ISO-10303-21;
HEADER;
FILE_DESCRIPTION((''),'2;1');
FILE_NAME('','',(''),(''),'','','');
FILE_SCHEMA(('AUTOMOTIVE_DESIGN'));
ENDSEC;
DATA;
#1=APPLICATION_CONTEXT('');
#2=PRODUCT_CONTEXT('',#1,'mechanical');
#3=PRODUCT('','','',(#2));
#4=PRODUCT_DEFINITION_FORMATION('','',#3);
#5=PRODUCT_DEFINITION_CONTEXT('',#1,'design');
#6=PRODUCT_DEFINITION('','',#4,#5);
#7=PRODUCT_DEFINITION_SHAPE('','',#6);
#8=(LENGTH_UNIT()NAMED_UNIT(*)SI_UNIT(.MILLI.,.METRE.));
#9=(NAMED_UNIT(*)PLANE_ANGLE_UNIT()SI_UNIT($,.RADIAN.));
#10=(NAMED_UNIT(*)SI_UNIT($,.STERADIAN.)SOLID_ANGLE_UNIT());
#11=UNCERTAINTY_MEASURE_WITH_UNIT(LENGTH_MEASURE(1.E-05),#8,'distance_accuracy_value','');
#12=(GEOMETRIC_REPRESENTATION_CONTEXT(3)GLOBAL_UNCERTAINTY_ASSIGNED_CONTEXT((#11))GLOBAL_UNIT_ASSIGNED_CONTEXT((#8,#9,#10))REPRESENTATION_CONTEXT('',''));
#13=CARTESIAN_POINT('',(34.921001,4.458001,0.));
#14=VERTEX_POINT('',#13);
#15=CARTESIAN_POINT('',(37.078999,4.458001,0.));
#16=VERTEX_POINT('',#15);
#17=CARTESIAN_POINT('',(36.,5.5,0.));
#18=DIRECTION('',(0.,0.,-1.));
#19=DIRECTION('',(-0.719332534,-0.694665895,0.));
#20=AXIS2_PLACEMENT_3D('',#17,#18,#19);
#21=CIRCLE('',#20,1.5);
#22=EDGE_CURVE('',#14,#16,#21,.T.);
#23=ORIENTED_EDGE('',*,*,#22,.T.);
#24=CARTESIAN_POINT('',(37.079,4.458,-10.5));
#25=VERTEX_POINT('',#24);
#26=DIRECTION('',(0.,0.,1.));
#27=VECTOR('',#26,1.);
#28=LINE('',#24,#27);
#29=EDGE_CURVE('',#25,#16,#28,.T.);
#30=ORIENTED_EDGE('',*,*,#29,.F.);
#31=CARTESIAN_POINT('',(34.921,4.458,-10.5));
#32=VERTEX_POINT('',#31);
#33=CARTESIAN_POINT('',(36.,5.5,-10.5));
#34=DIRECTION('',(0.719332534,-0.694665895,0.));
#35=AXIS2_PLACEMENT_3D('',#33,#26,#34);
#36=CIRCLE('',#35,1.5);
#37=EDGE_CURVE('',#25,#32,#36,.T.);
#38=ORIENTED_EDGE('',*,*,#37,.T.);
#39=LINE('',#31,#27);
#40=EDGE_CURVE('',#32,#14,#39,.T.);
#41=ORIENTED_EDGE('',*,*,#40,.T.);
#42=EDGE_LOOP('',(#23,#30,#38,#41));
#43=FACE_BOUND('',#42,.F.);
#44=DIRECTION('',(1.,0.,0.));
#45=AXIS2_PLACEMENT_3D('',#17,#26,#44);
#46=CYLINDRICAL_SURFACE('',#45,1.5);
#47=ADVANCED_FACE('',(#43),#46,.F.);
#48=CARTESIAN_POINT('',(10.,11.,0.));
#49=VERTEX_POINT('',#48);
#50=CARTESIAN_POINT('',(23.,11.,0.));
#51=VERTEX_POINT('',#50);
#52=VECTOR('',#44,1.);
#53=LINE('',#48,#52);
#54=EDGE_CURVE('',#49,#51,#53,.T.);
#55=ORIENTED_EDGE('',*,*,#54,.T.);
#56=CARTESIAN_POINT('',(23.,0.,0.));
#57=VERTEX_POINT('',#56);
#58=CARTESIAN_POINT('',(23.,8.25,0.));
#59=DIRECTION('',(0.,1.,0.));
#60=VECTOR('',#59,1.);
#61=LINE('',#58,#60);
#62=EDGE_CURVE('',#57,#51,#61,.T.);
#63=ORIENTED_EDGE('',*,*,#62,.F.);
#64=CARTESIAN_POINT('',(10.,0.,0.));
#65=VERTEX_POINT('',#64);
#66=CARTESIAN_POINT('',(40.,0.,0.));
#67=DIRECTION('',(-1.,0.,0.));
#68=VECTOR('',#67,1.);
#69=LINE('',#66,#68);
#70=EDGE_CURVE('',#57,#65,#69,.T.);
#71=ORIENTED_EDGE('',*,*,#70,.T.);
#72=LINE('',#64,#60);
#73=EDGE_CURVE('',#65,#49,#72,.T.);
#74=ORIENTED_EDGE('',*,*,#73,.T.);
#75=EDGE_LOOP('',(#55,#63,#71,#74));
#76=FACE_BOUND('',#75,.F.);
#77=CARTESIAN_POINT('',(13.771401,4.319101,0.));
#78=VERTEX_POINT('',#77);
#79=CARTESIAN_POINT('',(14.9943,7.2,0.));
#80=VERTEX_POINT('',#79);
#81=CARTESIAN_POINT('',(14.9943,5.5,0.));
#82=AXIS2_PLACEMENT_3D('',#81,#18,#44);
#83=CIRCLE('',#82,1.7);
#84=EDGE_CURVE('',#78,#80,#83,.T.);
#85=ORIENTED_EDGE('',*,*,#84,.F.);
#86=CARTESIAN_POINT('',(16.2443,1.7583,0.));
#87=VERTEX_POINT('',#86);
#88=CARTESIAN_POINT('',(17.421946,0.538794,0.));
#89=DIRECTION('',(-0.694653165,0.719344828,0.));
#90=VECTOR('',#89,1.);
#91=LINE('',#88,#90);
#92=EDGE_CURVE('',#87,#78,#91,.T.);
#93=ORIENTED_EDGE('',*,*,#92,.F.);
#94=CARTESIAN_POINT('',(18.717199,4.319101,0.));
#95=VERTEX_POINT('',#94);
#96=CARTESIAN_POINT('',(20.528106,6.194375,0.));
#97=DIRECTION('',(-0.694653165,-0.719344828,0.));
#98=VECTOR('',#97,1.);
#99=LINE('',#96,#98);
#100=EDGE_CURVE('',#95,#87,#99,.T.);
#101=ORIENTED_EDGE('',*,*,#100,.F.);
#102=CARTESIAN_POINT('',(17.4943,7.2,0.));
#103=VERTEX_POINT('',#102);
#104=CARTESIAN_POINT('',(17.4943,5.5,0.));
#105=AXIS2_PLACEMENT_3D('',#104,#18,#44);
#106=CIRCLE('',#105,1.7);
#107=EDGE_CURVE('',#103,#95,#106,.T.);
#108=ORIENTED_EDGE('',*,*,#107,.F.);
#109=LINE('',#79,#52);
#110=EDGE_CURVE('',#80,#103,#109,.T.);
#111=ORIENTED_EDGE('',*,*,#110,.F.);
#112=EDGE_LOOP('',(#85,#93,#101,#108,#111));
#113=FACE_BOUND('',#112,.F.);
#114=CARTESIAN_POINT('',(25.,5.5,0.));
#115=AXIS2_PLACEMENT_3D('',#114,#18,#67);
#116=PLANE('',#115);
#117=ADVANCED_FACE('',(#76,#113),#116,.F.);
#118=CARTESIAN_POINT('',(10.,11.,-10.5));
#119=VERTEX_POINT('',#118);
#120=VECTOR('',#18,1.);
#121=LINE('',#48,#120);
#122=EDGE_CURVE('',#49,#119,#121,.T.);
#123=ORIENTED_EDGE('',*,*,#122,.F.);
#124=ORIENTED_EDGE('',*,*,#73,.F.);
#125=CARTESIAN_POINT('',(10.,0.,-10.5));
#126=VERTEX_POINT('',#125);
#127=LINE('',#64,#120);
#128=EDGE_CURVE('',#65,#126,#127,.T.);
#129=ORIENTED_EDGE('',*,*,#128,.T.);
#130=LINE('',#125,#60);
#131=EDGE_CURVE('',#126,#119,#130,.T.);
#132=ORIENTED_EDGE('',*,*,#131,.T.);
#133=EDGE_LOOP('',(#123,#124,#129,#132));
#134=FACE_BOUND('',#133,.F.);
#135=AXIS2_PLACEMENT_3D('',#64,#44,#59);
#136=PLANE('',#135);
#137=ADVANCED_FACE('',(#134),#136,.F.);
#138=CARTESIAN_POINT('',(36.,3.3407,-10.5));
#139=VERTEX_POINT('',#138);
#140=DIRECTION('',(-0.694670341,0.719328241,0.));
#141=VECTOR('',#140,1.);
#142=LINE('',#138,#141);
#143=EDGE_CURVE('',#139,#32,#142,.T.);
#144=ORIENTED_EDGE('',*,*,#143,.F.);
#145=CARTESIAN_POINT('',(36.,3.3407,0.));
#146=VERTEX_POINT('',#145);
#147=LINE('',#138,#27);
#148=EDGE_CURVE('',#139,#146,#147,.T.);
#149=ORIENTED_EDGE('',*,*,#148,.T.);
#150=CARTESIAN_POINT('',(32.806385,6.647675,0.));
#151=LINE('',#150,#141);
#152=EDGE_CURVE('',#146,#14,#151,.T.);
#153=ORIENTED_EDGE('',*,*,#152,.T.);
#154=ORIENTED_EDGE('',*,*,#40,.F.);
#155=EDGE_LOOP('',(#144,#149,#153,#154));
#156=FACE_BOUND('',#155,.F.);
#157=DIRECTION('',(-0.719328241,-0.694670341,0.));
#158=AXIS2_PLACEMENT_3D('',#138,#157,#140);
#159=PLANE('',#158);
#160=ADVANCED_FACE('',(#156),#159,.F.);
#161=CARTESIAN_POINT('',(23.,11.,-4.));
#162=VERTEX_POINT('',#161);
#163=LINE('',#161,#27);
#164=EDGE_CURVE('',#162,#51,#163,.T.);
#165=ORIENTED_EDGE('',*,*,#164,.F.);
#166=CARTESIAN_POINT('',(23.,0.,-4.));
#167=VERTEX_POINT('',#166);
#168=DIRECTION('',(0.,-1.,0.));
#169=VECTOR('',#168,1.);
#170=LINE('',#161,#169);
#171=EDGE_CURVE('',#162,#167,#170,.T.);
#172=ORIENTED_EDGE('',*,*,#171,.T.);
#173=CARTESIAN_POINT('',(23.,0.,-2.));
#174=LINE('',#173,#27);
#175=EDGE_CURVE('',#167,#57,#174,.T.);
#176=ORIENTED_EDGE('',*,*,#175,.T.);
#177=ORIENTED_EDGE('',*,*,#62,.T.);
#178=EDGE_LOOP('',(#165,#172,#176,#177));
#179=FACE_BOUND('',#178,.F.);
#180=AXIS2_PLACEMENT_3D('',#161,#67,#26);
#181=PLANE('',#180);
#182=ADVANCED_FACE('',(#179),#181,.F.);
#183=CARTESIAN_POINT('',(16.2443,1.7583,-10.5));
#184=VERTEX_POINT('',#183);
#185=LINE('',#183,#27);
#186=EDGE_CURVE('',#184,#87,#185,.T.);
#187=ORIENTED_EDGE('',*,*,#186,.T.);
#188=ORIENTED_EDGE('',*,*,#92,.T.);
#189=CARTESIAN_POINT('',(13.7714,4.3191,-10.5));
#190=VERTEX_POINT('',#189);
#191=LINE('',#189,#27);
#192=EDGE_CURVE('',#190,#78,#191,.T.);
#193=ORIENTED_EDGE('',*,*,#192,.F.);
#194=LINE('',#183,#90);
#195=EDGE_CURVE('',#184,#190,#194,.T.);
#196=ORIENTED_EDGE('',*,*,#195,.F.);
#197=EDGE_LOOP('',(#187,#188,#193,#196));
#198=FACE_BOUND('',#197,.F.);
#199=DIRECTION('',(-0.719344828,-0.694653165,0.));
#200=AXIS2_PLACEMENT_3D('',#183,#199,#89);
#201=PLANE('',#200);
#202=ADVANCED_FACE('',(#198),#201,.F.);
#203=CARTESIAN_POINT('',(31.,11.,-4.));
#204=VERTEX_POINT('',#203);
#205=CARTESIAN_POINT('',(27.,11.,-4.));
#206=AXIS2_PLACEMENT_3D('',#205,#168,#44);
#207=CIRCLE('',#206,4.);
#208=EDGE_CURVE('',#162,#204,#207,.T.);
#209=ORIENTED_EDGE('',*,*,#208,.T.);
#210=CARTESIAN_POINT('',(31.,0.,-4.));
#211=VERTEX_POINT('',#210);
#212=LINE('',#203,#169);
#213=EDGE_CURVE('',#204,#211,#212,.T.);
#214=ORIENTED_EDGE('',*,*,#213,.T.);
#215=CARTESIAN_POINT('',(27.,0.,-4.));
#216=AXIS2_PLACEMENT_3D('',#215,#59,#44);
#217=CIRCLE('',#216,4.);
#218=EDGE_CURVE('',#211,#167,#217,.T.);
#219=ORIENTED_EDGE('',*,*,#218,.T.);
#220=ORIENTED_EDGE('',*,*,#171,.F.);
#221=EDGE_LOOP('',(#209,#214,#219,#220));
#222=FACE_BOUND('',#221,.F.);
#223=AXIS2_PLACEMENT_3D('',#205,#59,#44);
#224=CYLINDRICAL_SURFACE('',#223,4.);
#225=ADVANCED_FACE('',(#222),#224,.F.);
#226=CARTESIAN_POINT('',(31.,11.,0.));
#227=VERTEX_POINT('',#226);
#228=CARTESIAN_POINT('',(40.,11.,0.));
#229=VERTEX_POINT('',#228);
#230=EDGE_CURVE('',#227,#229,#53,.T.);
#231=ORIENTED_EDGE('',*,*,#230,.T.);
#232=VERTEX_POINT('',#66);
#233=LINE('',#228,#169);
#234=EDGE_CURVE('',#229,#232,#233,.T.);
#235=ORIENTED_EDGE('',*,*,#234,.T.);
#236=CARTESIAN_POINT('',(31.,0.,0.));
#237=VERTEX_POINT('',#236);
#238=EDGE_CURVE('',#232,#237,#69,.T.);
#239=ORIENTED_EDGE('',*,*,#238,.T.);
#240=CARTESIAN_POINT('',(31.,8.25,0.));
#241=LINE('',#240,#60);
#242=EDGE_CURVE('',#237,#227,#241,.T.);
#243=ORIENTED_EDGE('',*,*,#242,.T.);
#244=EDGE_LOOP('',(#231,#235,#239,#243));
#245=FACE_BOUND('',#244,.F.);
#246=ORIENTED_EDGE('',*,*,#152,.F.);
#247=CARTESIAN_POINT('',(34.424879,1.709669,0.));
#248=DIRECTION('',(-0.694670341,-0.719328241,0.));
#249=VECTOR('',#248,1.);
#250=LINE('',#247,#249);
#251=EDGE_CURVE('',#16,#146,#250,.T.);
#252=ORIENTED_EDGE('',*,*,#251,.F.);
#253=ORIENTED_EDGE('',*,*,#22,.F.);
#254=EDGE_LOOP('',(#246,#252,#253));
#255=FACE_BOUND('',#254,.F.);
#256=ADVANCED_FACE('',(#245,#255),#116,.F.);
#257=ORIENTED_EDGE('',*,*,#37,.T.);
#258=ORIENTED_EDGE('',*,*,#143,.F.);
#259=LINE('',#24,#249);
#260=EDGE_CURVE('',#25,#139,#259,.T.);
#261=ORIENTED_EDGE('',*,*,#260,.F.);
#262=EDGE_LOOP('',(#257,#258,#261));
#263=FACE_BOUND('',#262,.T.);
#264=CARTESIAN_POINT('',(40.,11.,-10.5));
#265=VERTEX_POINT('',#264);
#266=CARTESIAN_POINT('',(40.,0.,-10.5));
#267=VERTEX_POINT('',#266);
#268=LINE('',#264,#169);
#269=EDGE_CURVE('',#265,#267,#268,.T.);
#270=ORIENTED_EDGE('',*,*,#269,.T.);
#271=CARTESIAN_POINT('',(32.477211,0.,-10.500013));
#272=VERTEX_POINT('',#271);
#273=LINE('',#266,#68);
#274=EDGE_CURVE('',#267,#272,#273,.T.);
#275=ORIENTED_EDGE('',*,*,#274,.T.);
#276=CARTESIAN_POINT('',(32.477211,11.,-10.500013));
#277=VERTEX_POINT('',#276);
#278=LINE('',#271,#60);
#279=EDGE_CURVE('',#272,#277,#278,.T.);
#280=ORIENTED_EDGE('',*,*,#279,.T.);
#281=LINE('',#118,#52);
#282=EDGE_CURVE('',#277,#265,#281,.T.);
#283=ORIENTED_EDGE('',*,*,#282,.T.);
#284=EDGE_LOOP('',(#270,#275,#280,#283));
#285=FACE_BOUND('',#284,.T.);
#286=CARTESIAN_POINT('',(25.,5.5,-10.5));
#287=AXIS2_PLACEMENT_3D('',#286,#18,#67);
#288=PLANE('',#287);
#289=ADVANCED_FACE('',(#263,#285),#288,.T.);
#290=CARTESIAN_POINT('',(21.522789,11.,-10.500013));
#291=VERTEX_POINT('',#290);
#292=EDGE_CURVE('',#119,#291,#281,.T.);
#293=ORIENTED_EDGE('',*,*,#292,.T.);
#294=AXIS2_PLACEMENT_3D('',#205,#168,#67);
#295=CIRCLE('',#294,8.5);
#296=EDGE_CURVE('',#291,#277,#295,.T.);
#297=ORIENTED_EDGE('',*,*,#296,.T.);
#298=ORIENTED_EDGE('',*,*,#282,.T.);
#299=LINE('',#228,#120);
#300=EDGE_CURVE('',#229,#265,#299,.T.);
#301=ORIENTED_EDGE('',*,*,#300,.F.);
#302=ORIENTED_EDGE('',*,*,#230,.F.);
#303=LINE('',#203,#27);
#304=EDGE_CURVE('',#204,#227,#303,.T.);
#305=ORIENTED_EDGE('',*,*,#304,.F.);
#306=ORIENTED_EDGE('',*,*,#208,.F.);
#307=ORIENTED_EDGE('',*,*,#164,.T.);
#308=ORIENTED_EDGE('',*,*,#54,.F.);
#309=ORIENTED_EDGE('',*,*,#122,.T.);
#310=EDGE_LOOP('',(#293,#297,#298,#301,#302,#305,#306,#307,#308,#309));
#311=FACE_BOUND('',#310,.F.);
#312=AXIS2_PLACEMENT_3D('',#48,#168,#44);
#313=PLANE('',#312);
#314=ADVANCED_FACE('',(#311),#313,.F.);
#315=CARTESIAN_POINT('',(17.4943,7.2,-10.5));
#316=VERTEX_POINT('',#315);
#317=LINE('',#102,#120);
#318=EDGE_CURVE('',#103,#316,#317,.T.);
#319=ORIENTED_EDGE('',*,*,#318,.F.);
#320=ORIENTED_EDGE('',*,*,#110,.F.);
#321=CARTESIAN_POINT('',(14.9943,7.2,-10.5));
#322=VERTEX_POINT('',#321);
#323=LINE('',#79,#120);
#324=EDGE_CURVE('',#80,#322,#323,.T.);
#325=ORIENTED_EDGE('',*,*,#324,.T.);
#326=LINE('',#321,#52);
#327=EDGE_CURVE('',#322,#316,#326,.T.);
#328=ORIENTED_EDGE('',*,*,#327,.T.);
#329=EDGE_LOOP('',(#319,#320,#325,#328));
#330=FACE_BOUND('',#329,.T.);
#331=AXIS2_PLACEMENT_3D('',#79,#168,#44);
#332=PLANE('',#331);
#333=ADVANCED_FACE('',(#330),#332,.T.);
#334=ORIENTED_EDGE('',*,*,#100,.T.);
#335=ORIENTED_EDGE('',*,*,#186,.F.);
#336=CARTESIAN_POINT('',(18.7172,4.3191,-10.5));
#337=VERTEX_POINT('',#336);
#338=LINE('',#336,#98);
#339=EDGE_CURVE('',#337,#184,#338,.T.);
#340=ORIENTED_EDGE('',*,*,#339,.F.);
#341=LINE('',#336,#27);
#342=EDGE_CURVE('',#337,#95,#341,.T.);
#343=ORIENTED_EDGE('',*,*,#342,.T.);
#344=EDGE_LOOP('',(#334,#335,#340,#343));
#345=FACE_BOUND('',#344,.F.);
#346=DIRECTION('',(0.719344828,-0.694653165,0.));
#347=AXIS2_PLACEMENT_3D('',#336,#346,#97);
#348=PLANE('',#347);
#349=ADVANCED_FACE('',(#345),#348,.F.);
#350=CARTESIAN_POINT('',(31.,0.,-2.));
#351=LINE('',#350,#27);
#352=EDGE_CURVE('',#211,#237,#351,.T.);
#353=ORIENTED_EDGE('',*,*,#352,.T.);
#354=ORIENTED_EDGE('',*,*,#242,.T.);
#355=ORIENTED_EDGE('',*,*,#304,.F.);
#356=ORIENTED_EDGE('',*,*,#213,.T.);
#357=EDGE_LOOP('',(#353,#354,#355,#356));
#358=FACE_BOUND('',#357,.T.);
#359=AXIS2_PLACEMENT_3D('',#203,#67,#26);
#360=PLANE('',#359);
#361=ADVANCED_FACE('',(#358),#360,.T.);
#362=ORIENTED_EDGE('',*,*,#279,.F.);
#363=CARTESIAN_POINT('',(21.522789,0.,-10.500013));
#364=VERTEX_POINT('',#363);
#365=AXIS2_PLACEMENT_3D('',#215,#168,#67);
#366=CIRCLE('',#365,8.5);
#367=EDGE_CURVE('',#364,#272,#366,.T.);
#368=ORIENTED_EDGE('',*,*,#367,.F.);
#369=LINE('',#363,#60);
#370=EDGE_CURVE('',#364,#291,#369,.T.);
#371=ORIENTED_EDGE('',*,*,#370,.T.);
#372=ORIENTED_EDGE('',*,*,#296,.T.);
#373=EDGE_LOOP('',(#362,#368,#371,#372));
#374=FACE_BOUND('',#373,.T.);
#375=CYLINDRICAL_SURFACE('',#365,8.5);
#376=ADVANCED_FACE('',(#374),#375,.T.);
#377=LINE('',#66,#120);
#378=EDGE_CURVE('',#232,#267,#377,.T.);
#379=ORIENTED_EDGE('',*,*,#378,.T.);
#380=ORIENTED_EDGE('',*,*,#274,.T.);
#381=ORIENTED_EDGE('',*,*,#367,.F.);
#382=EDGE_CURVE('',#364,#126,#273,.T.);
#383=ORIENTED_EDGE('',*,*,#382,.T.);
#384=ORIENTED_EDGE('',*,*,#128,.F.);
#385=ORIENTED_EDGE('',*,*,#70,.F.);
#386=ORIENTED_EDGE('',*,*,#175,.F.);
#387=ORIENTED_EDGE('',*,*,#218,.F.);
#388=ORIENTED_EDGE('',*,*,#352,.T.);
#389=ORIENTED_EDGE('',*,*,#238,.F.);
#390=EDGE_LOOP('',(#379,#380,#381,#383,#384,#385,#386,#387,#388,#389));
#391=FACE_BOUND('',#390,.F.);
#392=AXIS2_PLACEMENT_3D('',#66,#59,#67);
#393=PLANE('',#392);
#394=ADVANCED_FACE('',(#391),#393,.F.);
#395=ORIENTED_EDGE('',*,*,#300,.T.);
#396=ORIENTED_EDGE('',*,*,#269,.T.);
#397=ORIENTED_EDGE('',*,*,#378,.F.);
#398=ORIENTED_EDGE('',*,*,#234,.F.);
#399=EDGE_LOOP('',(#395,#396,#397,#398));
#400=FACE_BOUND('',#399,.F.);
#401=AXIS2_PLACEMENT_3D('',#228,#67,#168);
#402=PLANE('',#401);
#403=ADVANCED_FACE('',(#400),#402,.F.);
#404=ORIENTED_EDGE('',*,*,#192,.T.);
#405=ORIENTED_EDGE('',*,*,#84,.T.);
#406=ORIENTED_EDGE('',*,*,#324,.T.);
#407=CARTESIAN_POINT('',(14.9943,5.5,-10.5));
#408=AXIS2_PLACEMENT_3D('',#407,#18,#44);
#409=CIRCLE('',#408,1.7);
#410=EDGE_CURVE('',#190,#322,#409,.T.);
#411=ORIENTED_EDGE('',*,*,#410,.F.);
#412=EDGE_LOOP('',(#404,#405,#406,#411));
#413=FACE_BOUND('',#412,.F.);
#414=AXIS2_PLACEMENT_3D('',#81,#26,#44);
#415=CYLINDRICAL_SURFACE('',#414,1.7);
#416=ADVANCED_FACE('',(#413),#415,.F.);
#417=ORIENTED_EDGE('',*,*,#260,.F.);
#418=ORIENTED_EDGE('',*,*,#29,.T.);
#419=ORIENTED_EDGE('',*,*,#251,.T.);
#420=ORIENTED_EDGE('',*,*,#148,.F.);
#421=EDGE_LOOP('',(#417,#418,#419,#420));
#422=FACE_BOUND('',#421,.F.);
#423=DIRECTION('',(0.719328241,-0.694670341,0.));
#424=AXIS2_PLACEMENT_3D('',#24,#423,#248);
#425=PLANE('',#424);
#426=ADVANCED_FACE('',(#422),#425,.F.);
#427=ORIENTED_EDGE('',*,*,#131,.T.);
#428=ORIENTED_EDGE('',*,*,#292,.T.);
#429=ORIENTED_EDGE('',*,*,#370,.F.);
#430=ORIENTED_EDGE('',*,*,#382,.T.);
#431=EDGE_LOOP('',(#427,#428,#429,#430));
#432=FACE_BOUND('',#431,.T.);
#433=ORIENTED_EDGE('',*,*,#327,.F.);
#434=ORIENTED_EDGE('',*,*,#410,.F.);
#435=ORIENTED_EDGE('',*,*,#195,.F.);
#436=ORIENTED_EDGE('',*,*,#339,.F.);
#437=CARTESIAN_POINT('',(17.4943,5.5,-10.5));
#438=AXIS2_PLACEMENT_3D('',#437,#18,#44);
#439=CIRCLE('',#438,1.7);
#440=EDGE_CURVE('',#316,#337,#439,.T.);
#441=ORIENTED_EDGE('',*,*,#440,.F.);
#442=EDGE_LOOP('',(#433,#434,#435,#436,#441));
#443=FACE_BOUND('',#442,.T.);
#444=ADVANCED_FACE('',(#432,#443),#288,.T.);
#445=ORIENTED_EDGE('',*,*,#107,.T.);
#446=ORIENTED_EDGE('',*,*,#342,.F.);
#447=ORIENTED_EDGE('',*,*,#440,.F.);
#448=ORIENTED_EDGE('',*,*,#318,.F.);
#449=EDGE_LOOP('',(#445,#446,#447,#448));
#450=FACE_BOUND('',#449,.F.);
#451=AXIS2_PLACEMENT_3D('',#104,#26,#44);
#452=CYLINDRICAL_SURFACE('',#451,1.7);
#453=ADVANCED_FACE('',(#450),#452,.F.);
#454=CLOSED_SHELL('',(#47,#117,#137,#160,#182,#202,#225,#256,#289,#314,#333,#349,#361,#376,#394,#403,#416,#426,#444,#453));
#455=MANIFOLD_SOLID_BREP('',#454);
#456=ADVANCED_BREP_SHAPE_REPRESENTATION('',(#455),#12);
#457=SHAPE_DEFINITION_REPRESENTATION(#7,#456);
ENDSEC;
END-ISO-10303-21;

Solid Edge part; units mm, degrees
sketch "Sketch1" plane through (0, 0, 0) normal (0, 0, 1) x (1, 0, 0)
  line L0 (10, 11) -> (40, 11)
  line L1 (40, 11) -> (40, 0)
  line L2 (40, 0) -> (10, 0)
  line L3 (10, 0) -> (10, 11)
  circle A0 centre (36, 5.5) radius 1.5
  arc A1 (14.9943, 3.8) -> (14.9943, 7.2) centre (14.9943, 5.5) cw
  line L4 (17.4943, 3.8) -> (14.9943, 3.8)
  arc A2 (17.4943, 7.2) -> (17.4943, 3.8) centre (17.4943, 5.5) cw
  line L5 (14.9943, 7.2) -> (17.4943, 7.2)
  dimension "D1" = 30
  dimension "D2" = 1.7
  dimension "D3" = 3
extrude "Protrusion1" add sketch "Sketch1" against normal up to vertex (10.5 mm away)
sketch "Sketch2" plane through (23.4971, 11, -6.25) normal (0, 1, 0) x (1, 0, 0)
  line L0 (-0.4971, -2.25) -> (-0.4971, -7.4687)
  line L1 (7.5029, -2.25) -> (7.5029, -8.6329)
  arc A0 (-0.4971, -2.25) -> (7.5029, -2.25) centre (3.5029, -2.25) cw
extrude "Cutout1" cut sketch "Sketch2" against normal through all material side at (23.05, 11, -1.3906)
sketch "Sketch3" plane through (25, 0, -5.25) normal (0, -1, 0) x (-1, 0, 0)
  line L0 (-7.4772, 5.25) -> (3.4772, 5.25)
  arc A0 (3.4772, 5.25) -> (-7.4772, 5.25) centre (-2, -1.25) ccw
extrude "Protrusion2" add sketch "Sketch3" against normal up to vertex (11 mm away)
sketch "Sketch4" plane through (15.7614, 5.5, -10.5) normal (0, 0, -1) x (1, 0, 0)
  line L0 (1.7329, 0) -> (2.9558, 1.1809)
  line L1 (2.9558, 1.1809) -> (0.4829, 3.7417)
  line L2 (0.4829, 3.7417) -> (-1.99, 1.1809)
  line L3 (-1.99, 1.1809) -> (1.7329, 0)
extrude "Cutout2" cut sketch "Sketch4" against normal through all
sketch "Sketch5" plane through (36.2386, 5.5, -10.5) normal (0, 0, -1) x (1, 0, 0)
  line L0 (-0.2386, 0) -> (0.8404, 1.042)
  line L1 (0.8404, 1.042) -> (-0.2386, 2.1593)
  line L2 (-0.2386, 2.1593) -> (-1.3176, 1.042)
  line L3 (-1.3176, 1.042) -> (-0.2386, 0)
extrude "Cutout3" cut sketch "Sketch5" against normal through all
